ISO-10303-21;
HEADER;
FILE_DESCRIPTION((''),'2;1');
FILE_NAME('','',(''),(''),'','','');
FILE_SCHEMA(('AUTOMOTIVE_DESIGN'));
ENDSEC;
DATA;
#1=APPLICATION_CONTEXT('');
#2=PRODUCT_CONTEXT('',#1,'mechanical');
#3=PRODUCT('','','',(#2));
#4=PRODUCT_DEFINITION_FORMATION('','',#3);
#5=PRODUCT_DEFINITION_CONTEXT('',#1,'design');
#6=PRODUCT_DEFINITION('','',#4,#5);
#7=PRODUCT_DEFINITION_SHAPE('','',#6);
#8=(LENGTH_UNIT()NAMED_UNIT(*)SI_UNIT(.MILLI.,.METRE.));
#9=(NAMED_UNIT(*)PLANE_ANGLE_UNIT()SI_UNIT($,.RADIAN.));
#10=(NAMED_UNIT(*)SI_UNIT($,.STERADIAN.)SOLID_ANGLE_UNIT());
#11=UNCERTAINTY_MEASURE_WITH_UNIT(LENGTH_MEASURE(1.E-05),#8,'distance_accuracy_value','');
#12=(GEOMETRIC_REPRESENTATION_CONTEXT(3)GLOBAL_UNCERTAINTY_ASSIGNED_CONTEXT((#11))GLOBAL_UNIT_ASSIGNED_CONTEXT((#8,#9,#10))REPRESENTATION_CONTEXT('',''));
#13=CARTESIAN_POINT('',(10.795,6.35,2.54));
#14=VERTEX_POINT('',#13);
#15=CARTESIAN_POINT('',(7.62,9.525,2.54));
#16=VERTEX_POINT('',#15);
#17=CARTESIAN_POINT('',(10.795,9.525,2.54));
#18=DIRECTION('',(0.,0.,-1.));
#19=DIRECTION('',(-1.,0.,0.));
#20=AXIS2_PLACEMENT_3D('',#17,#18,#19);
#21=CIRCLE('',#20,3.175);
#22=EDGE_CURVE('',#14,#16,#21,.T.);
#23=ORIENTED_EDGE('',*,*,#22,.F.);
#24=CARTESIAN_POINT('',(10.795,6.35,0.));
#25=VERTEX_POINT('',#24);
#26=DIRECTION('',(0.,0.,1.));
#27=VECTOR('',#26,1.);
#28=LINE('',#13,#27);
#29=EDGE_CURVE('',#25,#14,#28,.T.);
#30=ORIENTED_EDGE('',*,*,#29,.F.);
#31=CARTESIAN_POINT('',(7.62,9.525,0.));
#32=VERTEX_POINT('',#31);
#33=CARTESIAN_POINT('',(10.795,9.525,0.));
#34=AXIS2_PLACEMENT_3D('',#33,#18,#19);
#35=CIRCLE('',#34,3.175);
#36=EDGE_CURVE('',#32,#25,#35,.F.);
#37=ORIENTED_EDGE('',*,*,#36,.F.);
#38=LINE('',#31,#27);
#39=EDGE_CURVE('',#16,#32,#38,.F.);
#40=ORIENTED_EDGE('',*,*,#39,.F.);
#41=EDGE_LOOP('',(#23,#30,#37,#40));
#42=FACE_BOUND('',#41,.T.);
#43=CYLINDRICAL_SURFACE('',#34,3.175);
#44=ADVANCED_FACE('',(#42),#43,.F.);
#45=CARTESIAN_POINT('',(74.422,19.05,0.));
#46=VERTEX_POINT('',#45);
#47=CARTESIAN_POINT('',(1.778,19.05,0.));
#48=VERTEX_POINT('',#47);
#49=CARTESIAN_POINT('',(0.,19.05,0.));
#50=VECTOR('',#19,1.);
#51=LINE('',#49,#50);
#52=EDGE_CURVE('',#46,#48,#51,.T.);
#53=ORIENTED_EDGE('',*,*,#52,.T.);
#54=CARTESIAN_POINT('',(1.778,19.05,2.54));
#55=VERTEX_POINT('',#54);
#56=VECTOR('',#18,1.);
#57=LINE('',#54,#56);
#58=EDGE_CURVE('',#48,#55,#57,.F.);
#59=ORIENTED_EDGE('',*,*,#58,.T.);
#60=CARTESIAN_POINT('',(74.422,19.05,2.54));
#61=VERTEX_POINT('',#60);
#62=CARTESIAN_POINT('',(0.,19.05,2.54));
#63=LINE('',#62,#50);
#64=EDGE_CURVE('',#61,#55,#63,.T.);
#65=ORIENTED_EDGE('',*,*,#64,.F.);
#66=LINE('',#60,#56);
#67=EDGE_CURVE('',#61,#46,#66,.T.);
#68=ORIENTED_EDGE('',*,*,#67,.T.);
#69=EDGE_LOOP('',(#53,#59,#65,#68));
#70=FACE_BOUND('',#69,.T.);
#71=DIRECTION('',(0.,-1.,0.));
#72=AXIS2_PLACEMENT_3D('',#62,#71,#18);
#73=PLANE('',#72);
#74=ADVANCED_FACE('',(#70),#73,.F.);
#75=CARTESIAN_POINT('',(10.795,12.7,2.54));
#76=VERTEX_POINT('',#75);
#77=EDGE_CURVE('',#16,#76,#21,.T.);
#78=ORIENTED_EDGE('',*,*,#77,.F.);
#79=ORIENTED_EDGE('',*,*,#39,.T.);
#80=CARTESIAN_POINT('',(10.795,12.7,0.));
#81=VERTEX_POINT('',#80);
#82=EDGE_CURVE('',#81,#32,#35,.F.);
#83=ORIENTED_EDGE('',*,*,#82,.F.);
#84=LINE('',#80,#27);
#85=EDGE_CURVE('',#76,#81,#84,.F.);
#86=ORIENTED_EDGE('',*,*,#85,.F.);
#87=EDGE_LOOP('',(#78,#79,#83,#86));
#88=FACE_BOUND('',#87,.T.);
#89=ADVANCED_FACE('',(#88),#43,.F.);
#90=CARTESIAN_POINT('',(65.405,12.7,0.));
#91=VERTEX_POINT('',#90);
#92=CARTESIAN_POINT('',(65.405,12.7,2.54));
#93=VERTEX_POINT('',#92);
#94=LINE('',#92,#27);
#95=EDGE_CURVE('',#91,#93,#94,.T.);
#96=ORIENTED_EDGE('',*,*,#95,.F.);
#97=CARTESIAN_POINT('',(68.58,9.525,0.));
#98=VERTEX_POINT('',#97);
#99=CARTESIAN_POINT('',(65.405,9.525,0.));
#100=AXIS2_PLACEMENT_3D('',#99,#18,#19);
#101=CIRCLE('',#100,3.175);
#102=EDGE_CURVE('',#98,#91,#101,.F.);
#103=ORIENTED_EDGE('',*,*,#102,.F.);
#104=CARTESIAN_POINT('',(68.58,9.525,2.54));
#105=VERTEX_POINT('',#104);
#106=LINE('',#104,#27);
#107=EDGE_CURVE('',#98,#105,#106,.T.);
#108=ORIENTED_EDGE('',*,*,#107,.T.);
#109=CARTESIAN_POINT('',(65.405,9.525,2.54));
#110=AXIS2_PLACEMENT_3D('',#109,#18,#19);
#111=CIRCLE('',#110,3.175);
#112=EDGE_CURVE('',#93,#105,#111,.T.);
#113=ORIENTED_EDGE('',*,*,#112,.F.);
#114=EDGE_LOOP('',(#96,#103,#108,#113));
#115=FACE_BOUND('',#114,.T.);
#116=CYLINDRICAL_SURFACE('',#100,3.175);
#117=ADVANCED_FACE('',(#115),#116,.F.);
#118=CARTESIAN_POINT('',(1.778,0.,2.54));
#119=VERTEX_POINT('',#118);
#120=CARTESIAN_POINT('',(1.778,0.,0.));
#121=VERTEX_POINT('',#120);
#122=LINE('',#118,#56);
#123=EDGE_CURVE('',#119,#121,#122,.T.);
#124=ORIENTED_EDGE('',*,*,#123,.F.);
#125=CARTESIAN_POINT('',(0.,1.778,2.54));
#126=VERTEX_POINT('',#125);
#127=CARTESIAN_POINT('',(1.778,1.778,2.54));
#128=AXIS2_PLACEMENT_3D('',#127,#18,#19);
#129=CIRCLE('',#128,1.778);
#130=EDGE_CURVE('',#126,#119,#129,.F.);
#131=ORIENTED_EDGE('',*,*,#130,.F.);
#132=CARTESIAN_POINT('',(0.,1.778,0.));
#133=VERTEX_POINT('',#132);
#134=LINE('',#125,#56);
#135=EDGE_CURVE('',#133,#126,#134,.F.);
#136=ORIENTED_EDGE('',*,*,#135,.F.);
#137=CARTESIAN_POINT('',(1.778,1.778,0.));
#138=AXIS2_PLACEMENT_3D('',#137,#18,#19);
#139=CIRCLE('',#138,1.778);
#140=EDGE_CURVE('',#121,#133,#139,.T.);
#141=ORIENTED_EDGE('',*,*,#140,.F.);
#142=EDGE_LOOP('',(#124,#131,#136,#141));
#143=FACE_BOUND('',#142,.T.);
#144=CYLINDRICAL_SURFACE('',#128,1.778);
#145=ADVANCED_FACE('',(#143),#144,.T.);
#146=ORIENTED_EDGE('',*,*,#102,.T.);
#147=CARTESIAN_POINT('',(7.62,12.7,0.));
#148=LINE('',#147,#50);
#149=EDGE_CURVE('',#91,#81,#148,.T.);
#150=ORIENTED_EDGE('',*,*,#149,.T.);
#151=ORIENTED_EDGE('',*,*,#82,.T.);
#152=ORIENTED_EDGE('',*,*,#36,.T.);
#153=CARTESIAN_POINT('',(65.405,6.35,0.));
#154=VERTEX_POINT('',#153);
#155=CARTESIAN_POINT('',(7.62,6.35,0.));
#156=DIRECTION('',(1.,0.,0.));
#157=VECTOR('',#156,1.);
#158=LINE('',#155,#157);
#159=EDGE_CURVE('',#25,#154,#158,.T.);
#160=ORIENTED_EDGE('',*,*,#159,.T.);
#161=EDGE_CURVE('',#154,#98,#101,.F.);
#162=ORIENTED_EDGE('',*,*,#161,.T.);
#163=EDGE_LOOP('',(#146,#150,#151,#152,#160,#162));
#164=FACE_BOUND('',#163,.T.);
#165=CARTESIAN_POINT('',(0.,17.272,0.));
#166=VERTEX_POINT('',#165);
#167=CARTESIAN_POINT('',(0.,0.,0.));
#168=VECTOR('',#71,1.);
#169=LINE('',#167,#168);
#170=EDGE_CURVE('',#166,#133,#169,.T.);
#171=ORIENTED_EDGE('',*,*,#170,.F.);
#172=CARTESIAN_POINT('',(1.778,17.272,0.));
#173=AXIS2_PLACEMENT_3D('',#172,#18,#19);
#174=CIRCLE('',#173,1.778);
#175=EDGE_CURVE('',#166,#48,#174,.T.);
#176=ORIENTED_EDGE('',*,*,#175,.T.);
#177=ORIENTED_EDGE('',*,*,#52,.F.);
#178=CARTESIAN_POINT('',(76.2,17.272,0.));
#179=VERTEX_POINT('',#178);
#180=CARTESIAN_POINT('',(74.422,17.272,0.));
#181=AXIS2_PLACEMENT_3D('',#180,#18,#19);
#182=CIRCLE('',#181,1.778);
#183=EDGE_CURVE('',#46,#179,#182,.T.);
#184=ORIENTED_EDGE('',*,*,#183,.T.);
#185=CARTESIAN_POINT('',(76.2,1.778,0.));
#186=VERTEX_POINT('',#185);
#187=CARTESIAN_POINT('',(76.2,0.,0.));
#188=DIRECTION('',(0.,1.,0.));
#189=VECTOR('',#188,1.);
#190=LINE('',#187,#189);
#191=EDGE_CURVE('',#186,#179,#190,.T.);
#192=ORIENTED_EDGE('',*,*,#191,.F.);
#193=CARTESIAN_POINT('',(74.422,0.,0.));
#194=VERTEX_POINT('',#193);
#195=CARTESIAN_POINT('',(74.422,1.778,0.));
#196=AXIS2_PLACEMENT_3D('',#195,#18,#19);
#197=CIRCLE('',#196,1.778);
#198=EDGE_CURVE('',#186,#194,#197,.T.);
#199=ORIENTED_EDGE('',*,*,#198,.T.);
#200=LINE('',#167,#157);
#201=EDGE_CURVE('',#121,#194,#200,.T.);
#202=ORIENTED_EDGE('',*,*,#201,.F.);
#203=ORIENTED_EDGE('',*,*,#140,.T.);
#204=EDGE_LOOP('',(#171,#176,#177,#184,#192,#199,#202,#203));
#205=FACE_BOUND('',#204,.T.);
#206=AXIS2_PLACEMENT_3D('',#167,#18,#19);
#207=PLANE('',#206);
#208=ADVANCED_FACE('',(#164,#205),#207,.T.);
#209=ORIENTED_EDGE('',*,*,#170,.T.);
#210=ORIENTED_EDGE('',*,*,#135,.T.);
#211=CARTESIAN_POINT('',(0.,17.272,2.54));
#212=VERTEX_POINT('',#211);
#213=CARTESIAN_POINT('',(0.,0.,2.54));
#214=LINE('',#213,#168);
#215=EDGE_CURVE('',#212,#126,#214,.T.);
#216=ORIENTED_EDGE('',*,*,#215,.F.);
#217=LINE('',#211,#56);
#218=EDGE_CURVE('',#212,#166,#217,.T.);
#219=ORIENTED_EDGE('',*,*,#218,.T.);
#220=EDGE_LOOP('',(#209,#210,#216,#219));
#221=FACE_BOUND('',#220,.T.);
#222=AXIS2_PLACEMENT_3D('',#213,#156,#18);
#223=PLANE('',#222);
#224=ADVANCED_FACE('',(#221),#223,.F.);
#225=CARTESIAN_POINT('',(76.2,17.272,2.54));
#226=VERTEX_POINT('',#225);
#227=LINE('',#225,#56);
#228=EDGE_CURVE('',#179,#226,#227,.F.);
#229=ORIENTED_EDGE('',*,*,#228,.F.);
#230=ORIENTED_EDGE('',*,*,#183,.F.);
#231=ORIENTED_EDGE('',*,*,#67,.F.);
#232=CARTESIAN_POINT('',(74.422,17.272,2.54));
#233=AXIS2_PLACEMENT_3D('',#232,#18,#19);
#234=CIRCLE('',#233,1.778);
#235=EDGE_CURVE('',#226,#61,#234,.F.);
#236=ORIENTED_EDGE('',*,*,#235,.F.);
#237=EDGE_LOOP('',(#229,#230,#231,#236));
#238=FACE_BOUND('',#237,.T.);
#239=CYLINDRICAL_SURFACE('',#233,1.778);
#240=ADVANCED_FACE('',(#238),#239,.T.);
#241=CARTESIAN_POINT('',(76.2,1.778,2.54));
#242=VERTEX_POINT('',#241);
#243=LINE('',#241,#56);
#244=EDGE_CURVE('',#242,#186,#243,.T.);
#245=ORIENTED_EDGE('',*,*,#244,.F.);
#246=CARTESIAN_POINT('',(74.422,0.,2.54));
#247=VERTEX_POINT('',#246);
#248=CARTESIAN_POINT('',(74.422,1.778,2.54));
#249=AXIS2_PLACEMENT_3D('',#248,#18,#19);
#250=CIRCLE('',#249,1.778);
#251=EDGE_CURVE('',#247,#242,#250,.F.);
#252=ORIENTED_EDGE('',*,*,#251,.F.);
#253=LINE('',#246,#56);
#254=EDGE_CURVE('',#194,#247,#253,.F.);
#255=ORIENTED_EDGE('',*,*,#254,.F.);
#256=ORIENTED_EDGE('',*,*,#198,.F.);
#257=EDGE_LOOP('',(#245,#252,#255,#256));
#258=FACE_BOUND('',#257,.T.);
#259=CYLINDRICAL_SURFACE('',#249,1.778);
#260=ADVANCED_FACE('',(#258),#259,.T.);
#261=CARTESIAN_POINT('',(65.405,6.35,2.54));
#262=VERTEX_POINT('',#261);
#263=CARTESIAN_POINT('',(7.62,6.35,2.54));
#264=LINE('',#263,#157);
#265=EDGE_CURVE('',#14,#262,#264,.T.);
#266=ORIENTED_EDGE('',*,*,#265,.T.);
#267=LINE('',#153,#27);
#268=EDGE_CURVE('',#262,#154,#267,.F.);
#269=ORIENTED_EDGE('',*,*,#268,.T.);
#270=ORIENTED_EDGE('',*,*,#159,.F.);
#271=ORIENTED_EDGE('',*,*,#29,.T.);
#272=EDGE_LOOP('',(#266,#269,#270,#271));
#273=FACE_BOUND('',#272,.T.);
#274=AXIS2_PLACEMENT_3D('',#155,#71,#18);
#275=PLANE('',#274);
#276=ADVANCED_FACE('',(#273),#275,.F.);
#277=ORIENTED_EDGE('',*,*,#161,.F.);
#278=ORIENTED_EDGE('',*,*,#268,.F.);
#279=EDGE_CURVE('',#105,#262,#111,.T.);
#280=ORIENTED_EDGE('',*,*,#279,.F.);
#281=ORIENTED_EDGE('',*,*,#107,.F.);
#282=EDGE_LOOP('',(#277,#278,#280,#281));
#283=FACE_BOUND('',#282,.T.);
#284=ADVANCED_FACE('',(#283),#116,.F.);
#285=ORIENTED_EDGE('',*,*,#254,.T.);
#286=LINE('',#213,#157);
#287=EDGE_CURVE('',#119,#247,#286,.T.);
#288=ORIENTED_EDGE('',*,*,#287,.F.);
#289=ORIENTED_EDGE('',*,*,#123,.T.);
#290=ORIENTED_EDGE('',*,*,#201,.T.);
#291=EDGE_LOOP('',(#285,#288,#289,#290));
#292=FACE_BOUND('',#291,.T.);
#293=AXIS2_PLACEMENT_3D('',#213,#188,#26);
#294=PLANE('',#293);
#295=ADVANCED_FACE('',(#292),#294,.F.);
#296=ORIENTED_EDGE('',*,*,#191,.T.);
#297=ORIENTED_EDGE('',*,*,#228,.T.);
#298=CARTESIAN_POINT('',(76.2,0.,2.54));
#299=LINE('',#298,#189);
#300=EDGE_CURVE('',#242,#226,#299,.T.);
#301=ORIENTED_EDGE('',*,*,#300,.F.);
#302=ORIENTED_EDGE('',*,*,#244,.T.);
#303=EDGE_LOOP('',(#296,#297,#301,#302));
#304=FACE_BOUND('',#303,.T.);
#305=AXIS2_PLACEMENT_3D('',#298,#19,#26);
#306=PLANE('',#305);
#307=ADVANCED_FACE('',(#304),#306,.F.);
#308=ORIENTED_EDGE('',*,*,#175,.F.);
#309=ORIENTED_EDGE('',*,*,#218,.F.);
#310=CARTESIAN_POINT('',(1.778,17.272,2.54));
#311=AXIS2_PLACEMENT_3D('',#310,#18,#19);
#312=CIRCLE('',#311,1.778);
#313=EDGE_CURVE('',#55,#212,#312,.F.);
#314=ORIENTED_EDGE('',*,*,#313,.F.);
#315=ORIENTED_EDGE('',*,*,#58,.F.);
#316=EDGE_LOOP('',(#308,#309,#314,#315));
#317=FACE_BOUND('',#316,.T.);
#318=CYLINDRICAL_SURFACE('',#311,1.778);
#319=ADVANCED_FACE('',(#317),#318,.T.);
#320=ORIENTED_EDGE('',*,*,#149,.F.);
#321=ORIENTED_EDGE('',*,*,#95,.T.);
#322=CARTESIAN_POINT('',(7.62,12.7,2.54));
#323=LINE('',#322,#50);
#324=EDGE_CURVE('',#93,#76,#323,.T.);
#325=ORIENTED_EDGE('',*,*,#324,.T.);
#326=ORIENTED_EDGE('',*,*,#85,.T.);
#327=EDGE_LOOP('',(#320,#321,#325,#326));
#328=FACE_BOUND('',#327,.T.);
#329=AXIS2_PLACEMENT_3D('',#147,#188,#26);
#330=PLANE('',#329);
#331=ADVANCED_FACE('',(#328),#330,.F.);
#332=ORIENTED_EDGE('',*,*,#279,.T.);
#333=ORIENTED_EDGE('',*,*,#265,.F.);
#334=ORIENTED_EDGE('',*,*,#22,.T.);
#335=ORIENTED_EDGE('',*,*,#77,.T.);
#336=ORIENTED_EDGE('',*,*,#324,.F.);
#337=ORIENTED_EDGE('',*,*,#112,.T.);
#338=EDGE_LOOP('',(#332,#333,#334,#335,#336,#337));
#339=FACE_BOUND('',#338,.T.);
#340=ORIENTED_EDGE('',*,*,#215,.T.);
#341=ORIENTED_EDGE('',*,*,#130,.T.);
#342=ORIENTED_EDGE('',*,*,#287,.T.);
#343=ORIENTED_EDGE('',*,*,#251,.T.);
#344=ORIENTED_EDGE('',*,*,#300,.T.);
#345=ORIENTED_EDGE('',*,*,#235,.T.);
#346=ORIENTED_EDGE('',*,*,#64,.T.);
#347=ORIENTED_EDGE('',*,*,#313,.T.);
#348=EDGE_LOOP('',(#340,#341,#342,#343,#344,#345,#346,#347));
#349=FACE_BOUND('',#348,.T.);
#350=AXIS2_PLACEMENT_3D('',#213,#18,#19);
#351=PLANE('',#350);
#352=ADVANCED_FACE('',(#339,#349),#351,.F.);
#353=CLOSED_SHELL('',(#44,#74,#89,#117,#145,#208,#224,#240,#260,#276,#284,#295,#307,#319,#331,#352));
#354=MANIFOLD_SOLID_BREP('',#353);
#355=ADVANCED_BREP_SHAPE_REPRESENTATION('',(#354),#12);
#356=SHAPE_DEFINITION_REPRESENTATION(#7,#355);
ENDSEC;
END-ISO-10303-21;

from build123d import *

# Parameters (mm, degrees)
SKETCH1_W           = 76.2
SKETCH1_H           = 19.05
BOSS_EXTRUDE1_DEPTH = 2.54
SKETCH2_W           = 60.96
SKETCH2_H           = 6.35
CUT_EXTRUDE1_DEPTH  = 2.54
FILLET1_R           = 3.175
FILLET2_R           = 1.778


with BuildPart() as part:
    # Sketch1 → Boss-Extrude1 (new body)
    with BuildSketch(Plane.XY):
        with Locations((38.1, 9.525)):
            Rectangle(SKETCH1_W, SKETCH1_H)
    extrude(amount=BOSS_EXTRUDE1_DEPTH)

    # Sketch2 → Cut-Extrude1 (cut)
    with BuildSketch(Plane.XY.offset(2.54)):
        with Locations((38.1, 9.525)):
            Rectangle(SKETCH2_W, SKETCH2_H)
    extrude(amount=-CUT_EXTRUDE1_DEPTH, mode=Mode.SUBTRACT)

    # Fillet1
    fillet1_edges = [part.edges().sort_by_distance(p)[0] for p in [
        (68.58, 6.35, 1.27),
        (7.62, 12.7, 1.27),
        (7.62, 6.35, 1.27),
        (68.58, 12.7, 1.27),
    ]]
    fillet(fillet1_edges, radius=FILLET1_R - 0.0001)  # a hair under: the kernel refuses the full size

    # Fillet2
    fillet2_edges = [part.edges().sort_by_distance(p)[0] for p in [
        (0, 19.05, 1.27),
        (76.2, 19.05, 1.27),
        (76.2, 0, 1.27),
        (0, 0, 1.27),
    ]]
    fillet(fillet2_edges, radius=FILLET2_R)


solid = part.part
